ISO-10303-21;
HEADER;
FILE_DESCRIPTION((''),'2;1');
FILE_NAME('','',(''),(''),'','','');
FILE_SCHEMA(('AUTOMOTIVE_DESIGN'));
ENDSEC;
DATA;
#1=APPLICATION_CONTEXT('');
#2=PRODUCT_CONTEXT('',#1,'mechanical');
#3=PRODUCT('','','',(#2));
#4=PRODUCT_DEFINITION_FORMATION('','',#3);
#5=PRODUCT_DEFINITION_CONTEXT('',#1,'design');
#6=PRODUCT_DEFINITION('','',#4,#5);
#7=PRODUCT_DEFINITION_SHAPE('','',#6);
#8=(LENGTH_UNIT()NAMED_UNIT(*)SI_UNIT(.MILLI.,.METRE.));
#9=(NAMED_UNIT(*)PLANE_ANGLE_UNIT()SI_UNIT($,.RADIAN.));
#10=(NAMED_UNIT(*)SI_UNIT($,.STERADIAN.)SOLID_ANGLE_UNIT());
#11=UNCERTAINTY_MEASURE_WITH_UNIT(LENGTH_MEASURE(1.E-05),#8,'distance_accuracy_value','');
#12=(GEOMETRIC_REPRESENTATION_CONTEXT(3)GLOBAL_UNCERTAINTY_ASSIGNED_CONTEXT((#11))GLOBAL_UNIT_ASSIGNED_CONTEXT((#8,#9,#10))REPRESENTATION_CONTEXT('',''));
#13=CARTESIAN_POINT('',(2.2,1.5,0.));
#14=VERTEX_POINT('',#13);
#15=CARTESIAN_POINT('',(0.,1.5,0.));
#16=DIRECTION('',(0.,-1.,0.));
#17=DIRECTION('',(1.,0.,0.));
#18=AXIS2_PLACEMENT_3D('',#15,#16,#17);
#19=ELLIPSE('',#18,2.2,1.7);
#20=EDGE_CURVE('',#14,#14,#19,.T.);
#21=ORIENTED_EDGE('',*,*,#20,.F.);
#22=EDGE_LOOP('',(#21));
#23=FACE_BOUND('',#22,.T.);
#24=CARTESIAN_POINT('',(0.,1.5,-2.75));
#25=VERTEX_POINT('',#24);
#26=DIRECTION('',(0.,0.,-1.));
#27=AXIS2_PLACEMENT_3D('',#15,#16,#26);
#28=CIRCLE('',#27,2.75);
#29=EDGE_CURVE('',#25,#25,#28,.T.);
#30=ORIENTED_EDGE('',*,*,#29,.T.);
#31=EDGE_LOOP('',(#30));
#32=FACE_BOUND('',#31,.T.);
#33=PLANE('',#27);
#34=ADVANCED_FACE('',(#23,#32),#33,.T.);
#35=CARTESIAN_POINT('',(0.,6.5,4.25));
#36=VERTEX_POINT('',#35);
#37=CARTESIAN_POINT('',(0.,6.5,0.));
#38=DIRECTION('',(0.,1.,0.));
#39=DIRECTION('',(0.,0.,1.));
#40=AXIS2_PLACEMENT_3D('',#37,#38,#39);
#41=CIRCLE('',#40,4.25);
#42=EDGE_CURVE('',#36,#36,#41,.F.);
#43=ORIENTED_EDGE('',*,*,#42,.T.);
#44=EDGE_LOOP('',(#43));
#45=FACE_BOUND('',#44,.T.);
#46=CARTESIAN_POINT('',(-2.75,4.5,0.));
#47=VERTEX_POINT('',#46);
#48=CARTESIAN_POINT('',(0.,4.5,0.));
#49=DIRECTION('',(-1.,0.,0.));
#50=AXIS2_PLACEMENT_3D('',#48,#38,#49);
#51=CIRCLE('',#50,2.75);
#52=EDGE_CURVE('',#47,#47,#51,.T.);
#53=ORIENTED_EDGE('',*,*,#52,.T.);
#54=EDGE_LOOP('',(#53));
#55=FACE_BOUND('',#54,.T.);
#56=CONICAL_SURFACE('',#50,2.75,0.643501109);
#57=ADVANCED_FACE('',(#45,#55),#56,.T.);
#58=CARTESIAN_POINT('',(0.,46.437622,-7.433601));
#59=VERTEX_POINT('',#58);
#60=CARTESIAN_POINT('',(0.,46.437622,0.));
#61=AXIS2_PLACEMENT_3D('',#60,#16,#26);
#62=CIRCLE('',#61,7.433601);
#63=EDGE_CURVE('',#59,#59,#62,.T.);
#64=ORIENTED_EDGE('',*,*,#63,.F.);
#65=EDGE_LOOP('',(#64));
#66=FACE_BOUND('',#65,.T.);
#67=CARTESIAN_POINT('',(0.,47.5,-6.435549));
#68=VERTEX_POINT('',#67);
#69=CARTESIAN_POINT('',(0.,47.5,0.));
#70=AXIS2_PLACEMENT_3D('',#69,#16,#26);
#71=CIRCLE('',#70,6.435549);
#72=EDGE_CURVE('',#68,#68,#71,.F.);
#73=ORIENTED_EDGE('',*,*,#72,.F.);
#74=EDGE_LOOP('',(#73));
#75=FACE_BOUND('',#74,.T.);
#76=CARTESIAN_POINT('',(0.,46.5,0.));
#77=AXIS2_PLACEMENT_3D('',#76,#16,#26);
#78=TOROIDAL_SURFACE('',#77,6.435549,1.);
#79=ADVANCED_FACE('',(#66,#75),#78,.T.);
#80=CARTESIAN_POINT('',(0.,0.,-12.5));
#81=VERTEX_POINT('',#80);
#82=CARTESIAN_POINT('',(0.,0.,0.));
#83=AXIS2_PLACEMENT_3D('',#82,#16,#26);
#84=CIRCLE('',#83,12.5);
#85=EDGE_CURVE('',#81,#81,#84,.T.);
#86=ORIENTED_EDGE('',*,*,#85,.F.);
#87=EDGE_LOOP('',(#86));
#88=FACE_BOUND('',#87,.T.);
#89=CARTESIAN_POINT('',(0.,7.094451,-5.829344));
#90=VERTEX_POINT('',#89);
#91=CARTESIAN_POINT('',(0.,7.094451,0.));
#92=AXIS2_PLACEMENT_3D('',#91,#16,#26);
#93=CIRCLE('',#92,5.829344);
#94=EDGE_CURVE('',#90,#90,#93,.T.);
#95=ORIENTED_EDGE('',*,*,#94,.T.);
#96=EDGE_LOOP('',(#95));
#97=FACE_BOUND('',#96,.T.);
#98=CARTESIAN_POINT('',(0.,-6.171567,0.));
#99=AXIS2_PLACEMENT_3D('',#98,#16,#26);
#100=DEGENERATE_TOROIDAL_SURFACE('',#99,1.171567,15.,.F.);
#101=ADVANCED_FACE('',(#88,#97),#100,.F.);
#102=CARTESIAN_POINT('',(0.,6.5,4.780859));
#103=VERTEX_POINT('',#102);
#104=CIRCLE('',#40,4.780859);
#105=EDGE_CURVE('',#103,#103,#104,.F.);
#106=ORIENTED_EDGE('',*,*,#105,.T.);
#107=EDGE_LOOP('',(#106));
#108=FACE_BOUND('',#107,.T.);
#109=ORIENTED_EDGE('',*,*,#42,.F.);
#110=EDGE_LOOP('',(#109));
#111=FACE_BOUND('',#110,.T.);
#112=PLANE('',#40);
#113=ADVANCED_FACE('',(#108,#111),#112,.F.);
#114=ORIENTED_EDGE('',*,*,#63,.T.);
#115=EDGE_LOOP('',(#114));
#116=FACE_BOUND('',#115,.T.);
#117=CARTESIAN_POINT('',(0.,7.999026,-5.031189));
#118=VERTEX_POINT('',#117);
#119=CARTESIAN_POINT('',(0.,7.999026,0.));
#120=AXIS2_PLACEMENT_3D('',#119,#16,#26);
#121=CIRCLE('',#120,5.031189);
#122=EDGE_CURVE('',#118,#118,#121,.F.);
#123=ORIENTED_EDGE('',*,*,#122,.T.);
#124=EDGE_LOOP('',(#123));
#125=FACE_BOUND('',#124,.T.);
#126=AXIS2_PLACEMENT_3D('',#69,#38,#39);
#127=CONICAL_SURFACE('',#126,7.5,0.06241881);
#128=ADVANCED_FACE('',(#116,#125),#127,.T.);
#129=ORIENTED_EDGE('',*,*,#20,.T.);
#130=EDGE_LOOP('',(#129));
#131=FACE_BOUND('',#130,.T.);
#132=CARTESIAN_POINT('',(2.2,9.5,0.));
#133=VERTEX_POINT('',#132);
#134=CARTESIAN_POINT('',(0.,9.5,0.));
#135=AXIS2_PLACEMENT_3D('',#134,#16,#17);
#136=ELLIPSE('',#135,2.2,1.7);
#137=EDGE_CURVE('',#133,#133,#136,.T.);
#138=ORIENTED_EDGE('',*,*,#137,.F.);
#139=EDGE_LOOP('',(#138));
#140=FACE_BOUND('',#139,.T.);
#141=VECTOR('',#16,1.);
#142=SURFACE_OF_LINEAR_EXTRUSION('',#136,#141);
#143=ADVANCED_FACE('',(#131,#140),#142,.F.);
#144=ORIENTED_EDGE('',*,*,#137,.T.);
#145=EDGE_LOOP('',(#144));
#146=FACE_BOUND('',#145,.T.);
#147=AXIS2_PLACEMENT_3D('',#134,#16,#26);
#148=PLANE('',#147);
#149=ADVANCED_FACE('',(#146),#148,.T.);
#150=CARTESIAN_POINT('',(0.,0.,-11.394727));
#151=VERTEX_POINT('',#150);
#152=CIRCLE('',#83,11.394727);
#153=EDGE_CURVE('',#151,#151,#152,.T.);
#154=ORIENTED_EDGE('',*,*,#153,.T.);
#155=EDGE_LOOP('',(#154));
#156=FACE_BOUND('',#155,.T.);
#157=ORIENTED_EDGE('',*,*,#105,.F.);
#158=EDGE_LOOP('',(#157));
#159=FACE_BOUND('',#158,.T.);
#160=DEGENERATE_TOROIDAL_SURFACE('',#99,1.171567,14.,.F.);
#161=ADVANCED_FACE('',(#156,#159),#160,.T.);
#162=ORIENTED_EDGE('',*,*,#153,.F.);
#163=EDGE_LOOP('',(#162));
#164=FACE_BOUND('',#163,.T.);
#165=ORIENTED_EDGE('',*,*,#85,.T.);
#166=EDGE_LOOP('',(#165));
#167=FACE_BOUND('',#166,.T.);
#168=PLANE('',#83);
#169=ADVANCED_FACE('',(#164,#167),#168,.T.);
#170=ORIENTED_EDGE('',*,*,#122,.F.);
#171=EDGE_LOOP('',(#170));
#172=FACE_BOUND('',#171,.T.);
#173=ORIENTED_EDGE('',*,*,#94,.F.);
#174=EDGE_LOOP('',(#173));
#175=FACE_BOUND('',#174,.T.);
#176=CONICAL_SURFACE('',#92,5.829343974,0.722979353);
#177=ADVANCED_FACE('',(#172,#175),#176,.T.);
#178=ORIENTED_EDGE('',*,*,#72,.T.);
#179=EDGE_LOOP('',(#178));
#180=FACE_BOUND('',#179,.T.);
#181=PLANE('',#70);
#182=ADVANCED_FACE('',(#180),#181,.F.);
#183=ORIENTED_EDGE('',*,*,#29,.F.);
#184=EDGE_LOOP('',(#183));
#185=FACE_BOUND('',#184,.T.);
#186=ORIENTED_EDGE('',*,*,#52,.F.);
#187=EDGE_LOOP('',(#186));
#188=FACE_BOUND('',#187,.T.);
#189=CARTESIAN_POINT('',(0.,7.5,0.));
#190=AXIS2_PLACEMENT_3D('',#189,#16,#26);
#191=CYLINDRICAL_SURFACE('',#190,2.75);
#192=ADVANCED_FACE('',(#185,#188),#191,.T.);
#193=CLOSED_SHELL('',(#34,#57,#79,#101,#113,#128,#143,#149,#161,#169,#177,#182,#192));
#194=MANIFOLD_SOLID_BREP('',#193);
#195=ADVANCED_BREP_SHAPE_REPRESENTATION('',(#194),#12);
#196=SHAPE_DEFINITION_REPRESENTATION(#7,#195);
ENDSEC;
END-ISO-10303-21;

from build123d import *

# Parameters (mm, degrees)
SHELL4_T           = -1
FILLET3_R          = 1
CHAMFER1_SIZE      = 0.5
SKETCH14_RX        = 2.2
SKETCH14_RY        = 1.7
CUT_EXTRUDE1_DEPTH = 8


with BuildPart() as part:
    # Sketch9 → Revolve4 (revolve)
    with BuildSketch(Plane.XY, mode=Mode.PRIVATE) as revolve4_sk:
        with BuildLine():
            Line((0, 0), (12.5, 0))
            ThreePointArc((12.5, 0), (9.435034301, 4.435034301), (5, 7.5))
            Line((5, 7.5), (0, 7.5))
            Line((0, 7.5), (0, 0))
        make_face()
    revolve(revolve4_sk.sketch.rotate(Axis((0, 0, 0), (0, 1, 0)), 90), axis=Axis((0, 0, 0), (0, 1, 0)))

    # Shell4
    shell4_openings = [part.faces().sort_by_distance(p)[0] for p in [
        (0, 0, 0),
    ]]
    offset(amount=SHELL4_T, openings=shell4_openings, kind=Kind.INTERSECTION)

    # Sketch10 → Revolve5 (revolve)
    with BuildSketch(Plane.XY, mode=Mode.PRIVATE) as revolve5_sk:
        Polygon((0, 47.5), (0, 7.5), (2.75, 7.5), (5, 7.5), (7.5, 47.5), align=None)
        Polygon((2.75, 7.5), (0, 7.5), (0, 1.5), (2.75, 1.5), (2.75, 4.5), align=None)
    revolve(revolve5_sk.sketch.rotate(Axis((0, 7.5, 0), (0, 1, 0)), 90), axis=Axis((0, 7.5, 0), (0, 1, 0)))

    # Fillet3
    fillet3_edges = [part.edges().sort_by_distance(p)[0] for p in [
        (0, 47.5, 7.5),
    ]]
    fillet(fillet3_edges, radius=FILLET3_R)

    # Chamfer1
    # the kernel refuses this chamfer: 0.859778685, 0.5 mm, written as the material it adds along each edge
    with BuildSketch(Plane(origin=(0, 7.5, 0), x_dir=(0, 0, -1), z_dir=(1, 0, 0))) as chamfer1_piece_1:
        with BuildLine():
            Line((5 + CHAMFER1_SIZE * 0.0623782861552, CHAMFER1_SIZE * 0.998052578483), (5.829343974, -0.405549185))
            ThreePointArc((5.829343974, -0.405549185), (5.432071901, -0.203384623), (5, 0))
            Line((5, 0), (5 + CHAMFER1_SIZE * 0.0623782861552, CHAMFER1_SIZE * 0.998052578483))
        make_face()
    revolve(axis=Axis((0, 7.5, 0), (0, 1, 0)))

    # Sketch13 → Revolve6 (revolve)
    with BuildSketch(Plane.XY, mode=Mode.PRIVATE) as revolve6_sk:
        Polygon((5, 7.5), (2.75, 4.5), (2.75, 7.5), align=None)
    revolve(revolve6_sk.sketch.rotate(Axis((0, 7.5, 0), (0, -1, 0)), 270), axis=Axis((0, 7.5, 0), (0, -1, 0)))

    # Sketch14 → Cut-Extrude1 (cut)
    with BuildSketch(Plane.XZ.offset(-1.5)):
        with Locations((0, 0)):
            Ellipse(SKETCH14_RX, SKETCH14_RY)
    extrude(amount=-CUT_EXTRUDE1_DEPTH, mode=Mode.SUBTRACT)


solid = part.part
